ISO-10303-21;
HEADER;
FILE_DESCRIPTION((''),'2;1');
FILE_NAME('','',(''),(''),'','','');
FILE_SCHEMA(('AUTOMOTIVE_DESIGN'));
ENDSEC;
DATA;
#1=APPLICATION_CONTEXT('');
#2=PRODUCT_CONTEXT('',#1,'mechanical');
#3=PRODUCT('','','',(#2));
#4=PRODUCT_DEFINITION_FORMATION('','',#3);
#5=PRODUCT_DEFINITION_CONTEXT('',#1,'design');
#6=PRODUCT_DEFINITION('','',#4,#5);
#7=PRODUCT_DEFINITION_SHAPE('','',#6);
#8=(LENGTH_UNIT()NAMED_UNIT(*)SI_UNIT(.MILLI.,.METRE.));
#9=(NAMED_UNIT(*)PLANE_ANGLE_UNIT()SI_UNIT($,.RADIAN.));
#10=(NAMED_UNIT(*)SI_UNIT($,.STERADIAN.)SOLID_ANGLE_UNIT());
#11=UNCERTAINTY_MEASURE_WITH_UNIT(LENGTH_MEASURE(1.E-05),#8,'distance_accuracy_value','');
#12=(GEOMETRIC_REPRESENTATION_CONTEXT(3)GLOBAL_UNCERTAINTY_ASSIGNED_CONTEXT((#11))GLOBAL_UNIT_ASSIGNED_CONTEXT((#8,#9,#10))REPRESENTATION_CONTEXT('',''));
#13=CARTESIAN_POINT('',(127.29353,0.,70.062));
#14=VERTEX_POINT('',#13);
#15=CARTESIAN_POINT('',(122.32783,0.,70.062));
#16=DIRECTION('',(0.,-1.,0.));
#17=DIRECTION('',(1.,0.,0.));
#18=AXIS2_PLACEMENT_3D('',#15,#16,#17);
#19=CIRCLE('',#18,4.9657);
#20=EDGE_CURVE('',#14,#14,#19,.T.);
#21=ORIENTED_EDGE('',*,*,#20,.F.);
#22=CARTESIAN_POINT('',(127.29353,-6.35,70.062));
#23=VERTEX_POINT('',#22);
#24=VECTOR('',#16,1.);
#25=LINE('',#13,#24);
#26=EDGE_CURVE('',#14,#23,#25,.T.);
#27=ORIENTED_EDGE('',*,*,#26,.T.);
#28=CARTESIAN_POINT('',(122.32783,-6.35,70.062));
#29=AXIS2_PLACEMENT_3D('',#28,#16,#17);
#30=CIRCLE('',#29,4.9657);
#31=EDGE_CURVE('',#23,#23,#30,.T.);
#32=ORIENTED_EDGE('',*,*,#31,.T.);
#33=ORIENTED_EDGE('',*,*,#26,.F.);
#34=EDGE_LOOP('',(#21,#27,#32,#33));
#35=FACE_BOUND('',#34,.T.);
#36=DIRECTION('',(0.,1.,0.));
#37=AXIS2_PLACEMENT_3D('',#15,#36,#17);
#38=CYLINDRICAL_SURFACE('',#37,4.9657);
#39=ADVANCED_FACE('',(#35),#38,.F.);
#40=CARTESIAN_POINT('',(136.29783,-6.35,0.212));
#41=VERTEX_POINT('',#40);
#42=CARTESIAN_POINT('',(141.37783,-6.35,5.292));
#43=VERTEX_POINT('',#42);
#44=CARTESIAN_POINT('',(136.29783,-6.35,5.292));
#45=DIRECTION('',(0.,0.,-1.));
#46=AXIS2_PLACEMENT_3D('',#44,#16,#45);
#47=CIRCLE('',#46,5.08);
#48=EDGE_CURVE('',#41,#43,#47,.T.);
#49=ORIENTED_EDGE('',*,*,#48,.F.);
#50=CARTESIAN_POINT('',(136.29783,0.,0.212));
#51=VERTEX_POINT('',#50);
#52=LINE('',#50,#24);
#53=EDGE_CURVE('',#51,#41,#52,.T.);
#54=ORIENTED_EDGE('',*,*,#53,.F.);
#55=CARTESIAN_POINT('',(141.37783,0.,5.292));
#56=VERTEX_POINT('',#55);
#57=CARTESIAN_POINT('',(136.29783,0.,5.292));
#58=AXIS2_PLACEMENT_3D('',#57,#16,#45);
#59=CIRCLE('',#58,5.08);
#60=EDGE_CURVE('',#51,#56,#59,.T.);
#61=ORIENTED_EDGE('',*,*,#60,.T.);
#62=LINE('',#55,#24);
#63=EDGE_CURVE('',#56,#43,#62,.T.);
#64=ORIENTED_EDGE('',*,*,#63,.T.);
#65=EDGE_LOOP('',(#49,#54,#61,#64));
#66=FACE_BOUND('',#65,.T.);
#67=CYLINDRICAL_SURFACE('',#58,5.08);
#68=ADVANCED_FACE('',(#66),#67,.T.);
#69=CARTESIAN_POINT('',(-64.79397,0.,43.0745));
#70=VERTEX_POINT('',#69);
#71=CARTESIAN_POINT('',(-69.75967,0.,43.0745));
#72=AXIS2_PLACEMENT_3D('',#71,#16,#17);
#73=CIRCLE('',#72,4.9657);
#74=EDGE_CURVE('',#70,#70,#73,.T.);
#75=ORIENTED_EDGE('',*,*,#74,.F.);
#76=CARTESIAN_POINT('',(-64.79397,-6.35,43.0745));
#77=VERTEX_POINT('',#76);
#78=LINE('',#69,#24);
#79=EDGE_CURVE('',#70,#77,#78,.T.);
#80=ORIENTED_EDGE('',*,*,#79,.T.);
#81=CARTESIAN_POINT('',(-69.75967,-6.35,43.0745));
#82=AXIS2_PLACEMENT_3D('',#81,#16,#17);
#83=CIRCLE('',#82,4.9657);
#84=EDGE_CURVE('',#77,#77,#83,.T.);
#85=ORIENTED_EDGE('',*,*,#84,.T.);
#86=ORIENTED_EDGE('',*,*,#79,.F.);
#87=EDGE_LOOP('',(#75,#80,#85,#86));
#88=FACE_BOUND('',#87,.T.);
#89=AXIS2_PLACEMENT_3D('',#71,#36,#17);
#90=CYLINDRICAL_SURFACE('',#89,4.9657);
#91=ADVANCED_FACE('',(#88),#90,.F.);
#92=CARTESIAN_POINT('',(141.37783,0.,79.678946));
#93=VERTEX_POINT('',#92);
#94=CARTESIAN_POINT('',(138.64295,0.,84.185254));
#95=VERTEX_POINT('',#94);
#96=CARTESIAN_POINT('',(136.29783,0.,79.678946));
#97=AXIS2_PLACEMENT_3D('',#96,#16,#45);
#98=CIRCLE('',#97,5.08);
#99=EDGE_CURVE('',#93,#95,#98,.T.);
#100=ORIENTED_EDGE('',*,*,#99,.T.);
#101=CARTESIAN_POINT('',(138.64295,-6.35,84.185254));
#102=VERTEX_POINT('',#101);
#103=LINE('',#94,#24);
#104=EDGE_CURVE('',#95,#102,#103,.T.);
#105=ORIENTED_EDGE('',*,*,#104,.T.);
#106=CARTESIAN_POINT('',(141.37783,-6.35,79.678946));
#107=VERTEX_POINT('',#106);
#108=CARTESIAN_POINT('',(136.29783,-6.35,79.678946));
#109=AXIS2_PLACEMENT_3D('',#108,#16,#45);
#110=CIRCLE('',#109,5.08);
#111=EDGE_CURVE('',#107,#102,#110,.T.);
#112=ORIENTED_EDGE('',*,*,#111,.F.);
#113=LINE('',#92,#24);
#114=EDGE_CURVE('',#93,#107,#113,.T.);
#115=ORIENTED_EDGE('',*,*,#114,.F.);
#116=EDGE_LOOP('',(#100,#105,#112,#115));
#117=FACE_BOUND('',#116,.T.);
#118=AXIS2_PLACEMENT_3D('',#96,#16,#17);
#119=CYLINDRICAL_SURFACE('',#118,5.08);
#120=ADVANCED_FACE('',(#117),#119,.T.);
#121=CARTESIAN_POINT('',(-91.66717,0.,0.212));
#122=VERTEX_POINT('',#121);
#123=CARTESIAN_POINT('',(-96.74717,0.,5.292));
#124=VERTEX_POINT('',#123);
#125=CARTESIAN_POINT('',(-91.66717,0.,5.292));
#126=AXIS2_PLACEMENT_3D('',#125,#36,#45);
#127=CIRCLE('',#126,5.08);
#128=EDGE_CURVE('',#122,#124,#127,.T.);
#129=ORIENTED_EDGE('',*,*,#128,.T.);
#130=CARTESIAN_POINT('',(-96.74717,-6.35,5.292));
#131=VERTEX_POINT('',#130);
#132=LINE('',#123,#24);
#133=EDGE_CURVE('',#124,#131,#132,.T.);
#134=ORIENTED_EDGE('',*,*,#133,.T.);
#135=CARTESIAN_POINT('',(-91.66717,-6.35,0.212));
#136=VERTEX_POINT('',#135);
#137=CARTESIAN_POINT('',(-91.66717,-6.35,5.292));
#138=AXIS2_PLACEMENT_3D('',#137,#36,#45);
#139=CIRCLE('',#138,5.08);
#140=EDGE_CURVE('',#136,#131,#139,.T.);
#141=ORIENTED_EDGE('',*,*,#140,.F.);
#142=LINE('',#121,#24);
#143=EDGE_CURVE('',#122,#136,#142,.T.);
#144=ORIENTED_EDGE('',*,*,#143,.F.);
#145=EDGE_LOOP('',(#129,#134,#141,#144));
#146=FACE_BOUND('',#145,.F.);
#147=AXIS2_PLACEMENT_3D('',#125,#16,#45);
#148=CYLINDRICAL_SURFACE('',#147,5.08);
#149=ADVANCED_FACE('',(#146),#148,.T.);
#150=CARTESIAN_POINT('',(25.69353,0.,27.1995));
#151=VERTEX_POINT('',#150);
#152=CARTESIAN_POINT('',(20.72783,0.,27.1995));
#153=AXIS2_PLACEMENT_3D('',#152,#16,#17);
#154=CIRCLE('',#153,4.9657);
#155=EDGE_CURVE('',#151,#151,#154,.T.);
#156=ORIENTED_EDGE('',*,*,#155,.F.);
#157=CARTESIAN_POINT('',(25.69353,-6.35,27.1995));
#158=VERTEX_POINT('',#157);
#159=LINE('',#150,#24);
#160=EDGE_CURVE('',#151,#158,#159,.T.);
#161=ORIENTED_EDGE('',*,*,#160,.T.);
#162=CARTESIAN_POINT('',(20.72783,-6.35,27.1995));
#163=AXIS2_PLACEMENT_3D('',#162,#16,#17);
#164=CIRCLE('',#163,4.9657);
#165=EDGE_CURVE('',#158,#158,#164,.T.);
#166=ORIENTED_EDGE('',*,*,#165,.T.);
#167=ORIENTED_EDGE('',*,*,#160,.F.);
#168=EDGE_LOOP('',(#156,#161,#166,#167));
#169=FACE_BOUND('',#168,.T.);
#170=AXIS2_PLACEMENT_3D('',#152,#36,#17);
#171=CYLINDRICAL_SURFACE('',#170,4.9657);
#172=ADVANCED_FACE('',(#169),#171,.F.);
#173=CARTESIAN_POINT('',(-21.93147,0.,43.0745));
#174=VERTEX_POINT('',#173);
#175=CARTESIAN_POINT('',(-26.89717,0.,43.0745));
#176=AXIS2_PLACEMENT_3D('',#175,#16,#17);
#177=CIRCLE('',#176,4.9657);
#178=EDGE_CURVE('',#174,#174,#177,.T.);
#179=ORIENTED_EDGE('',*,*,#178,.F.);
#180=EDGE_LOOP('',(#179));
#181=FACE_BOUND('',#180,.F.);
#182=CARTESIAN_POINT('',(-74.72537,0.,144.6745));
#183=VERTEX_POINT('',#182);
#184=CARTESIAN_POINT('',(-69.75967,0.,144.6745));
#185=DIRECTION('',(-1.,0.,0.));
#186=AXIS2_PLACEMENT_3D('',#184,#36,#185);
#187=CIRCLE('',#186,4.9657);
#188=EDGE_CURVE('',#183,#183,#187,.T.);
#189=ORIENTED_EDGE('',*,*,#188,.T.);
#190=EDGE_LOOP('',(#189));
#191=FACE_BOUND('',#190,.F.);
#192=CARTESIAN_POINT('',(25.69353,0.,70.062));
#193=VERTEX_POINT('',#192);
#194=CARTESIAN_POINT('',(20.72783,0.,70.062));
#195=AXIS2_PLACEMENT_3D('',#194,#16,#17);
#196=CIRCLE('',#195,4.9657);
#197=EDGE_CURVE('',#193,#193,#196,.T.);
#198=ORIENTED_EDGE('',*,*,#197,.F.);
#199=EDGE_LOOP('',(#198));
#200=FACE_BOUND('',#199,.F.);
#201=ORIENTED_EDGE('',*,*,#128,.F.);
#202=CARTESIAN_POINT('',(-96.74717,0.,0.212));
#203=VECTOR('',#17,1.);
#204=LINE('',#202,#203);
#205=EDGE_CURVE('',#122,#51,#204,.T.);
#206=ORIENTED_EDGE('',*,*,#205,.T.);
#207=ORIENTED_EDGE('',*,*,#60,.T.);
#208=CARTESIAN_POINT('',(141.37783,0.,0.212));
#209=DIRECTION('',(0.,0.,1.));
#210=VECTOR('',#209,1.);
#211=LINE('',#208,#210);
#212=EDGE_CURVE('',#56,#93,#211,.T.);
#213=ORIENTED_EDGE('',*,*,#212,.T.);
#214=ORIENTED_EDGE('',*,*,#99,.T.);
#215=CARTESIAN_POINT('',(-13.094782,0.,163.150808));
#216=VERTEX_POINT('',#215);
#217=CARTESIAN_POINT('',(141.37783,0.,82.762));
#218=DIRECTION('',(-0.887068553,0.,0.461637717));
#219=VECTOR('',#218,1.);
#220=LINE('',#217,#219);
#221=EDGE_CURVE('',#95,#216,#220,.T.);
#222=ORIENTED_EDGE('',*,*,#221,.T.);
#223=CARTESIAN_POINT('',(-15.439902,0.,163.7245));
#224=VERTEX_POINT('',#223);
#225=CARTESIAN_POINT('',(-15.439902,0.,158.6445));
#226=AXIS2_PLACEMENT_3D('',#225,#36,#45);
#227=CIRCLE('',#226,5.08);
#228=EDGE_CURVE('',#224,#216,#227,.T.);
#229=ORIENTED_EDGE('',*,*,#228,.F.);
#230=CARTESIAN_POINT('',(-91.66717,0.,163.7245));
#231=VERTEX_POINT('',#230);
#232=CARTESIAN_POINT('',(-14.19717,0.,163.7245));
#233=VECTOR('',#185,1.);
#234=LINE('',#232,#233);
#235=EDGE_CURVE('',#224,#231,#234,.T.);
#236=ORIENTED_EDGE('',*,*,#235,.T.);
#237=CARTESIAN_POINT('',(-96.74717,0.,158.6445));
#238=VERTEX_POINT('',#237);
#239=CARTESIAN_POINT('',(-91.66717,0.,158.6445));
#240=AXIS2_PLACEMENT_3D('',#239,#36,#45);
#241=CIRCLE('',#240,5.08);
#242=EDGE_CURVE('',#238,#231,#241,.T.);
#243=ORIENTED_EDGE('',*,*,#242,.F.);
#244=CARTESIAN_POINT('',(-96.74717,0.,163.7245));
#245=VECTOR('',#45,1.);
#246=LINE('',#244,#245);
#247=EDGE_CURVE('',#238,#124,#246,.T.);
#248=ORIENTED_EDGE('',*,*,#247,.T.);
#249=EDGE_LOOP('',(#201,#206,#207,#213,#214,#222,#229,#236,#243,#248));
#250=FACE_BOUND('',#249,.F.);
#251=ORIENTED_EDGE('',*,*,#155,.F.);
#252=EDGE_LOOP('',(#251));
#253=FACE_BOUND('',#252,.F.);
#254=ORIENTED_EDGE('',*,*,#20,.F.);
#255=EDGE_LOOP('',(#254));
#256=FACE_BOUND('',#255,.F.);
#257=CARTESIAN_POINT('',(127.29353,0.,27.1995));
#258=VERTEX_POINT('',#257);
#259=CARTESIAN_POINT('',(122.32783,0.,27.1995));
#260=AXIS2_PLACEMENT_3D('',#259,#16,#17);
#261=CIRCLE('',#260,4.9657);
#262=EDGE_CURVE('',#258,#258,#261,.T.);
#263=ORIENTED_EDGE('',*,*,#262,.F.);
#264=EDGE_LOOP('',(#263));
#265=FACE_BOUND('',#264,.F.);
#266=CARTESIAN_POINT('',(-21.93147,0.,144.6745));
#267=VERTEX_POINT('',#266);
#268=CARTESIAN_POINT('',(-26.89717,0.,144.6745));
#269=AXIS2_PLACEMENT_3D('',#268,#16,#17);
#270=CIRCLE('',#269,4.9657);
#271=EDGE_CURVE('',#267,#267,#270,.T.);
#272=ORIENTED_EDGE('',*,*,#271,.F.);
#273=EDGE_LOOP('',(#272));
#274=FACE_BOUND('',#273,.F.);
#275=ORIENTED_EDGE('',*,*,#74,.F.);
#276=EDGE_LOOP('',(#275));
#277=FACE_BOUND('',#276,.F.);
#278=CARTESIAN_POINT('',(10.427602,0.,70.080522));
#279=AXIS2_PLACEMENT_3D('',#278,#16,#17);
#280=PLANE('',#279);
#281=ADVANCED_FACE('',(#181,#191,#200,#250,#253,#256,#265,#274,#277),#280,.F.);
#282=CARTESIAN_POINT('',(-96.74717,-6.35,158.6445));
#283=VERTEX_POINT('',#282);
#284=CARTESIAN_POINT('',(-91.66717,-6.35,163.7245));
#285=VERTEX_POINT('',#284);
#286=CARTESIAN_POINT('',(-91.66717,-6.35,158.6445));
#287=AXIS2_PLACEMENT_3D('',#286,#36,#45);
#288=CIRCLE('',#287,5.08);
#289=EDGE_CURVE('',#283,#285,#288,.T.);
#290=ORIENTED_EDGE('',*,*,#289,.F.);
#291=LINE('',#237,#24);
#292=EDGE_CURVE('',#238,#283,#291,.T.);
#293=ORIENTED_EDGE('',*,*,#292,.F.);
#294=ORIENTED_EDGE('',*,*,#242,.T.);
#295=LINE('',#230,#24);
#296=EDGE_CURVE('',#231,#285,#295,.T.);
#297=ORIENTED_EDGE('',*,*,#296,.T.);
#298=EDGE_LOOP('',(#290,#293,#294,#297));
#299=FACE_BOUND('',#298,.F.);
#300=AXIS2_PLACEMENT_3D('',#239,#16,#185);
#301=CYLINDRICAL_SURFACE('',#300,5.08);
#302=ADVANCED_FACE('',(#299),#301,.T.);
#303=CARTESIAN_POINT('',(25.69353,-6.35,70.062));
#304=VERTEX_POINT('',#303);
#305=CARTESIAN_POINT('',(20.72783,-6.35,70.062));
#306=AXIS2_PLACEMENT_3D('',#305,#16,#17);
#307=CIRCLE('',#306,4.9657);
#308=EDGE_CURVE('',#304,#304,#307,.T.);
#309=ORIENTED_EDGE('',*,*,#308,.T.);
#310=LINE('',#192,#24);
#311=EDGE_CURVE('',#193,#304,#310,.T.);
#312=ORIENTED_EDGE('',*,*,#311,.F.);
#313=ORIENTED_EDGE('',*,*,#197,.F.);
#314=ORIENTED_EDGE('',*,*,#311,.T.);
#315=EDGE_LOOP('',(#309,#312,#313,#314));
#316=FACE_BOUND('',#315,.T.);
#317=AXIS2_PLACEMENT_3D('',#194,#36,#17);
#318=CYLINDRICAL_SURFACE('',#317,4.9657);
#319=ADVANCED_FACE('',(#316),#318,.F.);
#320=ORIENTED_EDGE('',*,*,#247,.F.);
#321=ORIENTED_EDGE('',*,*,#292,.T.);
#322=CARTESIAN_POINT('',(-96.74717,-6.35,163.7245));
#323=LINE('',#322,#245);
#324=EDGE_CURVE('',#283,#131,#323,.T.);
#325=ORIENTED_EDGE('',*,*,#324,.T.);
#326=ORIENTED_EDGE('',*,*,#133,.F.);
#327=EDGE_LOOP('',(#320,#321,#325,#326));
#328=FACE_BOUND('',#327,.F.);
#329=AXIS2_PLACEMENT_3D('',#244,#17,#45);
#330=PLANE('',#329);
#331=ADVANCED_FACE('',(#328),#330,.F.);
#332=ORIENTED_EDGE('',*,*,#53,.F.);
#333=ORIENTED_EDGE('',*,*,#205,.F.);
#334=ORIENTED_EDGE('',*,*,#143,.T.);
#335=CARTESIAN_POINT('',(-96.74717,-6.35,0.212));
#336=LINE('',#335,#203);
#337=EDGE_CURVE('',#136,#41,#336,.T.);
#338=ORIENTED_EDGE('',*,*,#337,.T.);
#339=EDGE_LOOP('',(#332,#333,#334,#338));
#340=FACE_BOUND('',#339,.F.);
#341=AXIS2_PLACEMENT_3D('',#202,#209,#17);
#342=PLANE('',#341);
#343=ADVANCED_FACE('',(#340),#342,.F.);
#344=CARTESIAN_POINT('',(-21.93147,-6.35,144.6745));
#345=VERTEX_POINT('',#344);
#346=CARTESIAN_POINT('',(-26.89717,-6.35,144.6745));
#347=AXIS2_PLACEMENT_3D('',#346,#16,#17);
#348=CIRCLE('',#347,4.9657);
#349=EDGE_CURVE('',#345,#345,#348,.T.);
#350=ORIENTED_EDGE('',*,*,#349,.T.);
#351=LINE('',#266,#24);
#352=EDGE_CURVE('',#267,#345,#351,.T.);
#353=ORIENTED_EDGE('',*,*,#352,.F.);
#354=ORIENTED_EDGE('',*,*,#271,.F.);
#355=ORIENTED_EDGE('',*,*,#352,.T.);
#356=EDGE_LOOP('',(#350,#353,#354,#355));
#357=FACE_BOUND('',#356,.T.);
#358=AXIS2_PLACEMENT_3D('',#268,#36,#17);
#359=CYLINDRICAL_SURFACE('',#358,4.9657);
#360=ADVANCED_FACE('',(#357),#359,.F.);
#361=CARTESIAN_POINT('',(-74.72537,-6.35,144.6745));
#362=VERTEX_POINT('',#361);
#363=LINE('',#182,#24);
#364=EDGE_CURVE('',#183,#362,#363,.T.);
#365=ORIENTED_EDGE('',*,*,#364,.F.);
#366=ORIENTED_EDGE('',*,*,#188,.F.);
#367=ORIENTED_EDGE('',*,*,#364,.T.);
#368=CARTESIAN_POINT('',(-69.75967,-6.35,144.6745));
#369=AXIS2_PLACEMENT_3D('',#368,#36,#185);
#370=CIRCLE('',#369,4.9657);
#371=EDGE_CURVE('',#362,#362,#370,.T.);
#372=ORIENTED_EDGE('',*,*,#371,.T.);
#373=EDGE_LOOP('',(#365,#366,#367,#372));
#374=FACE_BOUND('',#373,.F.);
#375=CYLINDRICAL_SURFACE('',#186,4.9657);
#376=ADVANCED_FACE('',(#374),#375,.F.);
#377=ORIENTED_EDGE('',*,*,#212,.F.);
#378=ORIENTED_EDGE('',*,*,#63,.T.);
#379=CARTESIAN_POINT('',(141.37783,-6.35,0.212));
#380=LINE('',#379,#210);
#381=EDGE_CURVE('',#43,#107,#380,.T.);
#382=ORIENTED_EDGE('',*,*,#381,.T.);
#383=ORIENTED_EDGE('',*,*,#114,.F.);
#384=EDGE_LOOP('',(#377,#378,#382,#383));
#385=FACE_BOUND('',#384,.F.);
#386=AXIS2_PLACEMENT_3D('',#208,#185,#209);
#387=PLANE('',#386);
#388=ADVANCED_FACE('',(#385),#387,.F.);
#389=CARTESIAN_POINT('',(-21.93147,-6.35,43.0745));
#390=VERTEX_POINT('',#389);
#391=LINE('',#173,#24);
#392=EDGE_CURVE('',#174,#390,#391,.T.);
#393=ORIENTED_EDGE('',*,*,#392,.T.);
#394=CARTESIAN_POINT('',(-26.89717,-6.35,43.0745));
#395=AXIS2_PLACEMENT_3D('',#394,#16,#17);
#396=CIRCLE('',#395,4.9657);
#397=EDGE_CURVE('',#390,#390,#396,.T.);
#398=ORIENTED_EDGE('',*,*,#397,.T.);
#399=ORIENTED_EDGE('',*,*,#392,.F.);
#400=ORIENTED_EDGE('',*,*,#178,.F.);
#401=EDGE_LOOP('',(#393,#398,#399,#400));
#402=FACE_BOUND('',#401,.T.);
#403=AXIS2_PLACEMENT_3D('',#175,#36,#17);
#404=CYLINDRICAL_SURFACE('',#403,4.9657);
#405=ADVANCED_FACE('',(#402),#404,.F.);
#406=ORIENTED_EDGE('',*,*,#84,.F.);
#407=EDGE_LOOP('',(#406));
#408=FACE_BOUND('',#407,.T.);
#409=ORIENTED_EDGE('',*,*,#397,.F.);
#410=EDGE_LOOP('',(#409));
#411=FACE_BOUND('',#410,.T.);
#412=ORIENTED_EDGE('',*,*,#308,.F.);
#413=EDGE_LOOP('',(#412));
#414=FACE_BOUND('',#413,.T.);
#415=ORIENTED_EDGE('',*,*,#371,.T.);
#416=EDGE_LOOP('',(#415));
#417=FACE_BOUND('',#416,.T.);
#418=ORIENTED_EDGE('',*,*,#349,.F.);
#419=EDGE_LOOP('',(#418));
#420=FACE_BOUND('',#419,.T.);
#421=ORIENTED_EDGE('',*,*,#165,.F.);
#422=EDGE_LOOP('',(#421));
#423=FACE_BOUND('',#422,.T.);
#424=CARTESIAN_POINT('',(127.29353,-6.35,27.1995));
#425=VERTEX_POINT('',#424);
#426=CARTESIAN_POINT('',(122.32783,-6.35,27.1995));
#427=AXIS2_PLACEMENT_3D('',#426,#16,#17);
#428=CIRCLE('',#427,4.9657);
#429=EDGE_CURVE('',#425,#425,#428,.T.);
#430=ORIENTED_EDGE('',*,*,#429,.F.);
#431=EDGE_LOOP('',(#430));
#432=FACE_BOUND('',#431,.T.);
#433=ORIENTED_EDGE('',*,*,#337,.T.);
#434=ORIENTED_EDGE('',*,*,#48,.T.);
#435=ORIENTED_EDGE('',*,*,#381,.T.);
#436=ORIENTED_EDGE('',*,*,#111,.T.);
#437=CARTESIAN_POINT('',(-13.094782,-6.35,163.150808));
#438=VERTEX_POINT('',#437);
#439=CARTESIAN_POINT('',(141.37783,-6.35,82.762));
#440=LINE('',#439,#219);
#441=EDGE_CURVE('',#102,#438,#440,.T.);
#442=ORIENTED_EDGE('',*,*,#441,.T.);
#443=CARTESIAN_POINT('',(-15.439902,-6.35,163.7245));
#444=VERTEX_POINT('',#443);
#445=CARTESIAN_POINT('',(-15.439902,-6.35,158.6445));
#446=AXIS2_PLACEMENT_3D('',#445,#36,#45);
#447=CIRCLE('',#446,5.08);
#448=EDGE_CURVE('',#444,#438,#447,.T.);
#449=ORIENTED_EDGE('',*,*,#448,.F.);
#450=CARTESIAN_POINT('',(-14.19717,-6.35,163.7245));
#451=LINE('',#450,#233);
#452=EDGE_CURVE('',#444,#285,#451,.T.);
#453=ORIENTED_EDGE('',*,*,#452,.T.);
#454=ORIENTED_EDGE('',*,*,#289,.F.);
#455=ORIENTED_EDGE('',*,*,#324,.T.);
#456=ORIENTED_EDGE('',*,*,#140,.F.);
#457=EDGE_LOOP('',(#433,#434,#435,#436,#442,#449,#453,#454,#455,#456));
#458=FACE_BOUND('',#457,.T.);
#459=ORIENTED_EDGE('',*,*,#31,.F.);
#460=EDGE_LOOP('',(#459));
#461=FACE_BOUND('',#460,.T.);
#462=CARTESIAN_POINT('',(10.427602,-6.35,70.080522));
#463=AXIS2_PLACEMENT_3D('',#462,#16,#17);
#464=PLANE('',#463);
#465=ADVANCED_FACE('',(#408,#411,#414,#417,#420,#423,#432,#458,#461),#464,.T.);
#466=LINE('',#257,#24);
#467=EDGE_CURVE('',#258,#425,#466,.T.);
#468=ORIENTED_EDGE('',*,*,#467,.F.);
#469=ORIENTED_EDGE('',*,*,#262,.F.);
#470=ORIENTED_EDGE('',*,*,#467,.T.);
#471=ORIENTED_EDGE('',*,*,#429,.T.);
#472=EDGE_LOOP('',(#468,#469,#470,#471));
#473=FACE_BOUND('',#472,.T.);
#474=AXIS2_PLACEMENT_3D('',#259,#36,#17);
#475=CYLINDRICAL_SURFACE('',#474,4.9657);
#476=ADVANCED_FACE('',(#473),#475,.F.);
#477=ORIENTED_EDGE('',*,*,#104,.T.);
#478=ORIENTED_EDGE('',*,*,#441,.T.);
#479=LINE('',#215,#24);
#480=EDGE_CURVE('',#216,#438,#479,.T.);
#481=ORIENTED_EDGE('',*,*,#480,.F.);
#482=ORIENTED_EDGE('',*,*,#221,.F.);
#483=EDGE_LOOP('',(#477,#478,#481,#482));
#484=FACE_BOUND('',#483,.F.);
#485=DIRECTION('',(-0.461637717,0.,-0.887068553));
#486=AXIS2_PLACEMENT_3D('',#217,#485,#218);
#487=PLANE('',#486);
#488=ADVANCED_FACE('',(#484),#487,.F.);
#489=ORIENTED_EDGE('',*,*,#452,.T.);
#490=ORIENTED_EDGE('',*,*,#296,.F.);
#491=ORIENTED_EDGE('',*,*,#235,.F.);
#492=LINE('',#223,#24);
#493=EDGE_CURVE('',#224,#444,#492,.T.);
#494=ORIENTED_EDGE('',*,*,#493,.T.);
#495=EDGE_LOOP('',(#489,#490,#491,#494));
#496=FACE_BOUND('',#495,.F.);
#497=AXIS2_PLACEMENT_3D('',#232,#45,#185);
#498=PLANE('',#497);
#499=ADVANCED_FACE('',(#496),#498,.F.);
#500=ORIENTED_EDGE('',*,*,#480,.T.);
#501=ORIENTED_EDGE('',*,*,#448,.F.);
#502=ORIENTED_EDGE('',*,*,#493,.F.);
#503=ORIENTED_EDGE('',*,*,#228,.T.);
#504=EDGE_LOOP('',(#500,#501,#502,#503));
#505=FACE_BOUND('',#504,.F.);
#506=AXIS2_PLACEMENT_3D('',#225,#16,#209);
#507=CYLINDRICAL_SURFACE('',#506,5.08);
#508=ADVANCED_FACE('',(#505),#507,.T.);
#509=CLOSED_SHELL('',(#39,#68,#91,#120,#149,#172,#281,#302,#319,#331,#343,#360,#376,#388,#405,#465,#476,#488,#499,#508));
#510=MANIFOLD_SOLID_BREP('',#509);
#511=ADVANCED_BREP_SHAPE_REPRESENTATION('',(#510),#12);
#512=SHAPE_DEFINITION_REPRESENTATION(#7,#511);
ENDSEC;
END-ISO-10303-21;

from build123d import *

# Parameters (mm, degrees)
F0_R     = 4.9657
F1_DEPTH = 6.35
F2_R     = 5.08


# Not quite as in the source:
# - a feature names something its author has since deleted; it is built from what else it names


with BuildPart() as f1:
    # F0 (on Front) → F1 (new body)
    with BuildSketch(Plane.XZ):
        Polygon((-96.7471700311, 0.2120000629), (141.3778299689, 0.2120000629), (141.3778299689, 82.7620000629), (-14.1971700311, 163.7245000629), (-96.7471700311, 163.7245000629), (-96.7471700311, 144.6745000629), align=None)
        with Locations((20.7278299689, 27.1995000629)):
            Circle(F0_R, mode=Mode.SUBTRACT)
        with Locations((-69.7596700311, 43.0745000629)):
            Circle(F0_R, mode=Mode.SUBTRACT)
        with Locations((-26.8971700311, 43.0745000629)):
            Circle(F0_R, mode=Mode.SUBTRACT)
        with Locations((20.7278299689, 70.0620000629)):
            Circle(F0_R, mode=Mode.SUBTRACT)
        with Locations((122.3278299689, 27.1995000629)):
            Circle(F0_R, mode=Mode.SUBTRACT)
        with Locations((122.3278299689, 70.0620000629)):
            Circle(F0_R, mode=Mode.SUBTRACT)
        with BuildLine():
            ThreePointArc((-64.7939700311, 144.6745000629), (-69.7596700311, 139.7088000629), (-74.7253700311, 144.6745000629))
            ThreePointArc((-74.7253700311, 144.6745000629), (-69.7596700311, 149.6402000629), (-64.7939700311, 144.6745000629))
        make_face(mode=Mode.SUBTRACT)
        with Locations((-26.8971700311, 144.6745000629)):
            Circle(F0_R, mode=Mode.SUBTRACT)
    extrude(amount=F1_DEPTH)

    # F2
    f2_edges = [f1.edges().sort_by_distance(p)[0] for p in [
        (-96.74717, -3.175, 0.212),
        (-96.74717, -3.175, 163.7245),
        (-14.19717, -3.175, 163.7245),
        (141.37783, -3.175, 82.762),
        (141.37783, -3.175, 0.212),
    ]]
    fillet(f2_edges, radius=F2_R)


solid = f1.part
